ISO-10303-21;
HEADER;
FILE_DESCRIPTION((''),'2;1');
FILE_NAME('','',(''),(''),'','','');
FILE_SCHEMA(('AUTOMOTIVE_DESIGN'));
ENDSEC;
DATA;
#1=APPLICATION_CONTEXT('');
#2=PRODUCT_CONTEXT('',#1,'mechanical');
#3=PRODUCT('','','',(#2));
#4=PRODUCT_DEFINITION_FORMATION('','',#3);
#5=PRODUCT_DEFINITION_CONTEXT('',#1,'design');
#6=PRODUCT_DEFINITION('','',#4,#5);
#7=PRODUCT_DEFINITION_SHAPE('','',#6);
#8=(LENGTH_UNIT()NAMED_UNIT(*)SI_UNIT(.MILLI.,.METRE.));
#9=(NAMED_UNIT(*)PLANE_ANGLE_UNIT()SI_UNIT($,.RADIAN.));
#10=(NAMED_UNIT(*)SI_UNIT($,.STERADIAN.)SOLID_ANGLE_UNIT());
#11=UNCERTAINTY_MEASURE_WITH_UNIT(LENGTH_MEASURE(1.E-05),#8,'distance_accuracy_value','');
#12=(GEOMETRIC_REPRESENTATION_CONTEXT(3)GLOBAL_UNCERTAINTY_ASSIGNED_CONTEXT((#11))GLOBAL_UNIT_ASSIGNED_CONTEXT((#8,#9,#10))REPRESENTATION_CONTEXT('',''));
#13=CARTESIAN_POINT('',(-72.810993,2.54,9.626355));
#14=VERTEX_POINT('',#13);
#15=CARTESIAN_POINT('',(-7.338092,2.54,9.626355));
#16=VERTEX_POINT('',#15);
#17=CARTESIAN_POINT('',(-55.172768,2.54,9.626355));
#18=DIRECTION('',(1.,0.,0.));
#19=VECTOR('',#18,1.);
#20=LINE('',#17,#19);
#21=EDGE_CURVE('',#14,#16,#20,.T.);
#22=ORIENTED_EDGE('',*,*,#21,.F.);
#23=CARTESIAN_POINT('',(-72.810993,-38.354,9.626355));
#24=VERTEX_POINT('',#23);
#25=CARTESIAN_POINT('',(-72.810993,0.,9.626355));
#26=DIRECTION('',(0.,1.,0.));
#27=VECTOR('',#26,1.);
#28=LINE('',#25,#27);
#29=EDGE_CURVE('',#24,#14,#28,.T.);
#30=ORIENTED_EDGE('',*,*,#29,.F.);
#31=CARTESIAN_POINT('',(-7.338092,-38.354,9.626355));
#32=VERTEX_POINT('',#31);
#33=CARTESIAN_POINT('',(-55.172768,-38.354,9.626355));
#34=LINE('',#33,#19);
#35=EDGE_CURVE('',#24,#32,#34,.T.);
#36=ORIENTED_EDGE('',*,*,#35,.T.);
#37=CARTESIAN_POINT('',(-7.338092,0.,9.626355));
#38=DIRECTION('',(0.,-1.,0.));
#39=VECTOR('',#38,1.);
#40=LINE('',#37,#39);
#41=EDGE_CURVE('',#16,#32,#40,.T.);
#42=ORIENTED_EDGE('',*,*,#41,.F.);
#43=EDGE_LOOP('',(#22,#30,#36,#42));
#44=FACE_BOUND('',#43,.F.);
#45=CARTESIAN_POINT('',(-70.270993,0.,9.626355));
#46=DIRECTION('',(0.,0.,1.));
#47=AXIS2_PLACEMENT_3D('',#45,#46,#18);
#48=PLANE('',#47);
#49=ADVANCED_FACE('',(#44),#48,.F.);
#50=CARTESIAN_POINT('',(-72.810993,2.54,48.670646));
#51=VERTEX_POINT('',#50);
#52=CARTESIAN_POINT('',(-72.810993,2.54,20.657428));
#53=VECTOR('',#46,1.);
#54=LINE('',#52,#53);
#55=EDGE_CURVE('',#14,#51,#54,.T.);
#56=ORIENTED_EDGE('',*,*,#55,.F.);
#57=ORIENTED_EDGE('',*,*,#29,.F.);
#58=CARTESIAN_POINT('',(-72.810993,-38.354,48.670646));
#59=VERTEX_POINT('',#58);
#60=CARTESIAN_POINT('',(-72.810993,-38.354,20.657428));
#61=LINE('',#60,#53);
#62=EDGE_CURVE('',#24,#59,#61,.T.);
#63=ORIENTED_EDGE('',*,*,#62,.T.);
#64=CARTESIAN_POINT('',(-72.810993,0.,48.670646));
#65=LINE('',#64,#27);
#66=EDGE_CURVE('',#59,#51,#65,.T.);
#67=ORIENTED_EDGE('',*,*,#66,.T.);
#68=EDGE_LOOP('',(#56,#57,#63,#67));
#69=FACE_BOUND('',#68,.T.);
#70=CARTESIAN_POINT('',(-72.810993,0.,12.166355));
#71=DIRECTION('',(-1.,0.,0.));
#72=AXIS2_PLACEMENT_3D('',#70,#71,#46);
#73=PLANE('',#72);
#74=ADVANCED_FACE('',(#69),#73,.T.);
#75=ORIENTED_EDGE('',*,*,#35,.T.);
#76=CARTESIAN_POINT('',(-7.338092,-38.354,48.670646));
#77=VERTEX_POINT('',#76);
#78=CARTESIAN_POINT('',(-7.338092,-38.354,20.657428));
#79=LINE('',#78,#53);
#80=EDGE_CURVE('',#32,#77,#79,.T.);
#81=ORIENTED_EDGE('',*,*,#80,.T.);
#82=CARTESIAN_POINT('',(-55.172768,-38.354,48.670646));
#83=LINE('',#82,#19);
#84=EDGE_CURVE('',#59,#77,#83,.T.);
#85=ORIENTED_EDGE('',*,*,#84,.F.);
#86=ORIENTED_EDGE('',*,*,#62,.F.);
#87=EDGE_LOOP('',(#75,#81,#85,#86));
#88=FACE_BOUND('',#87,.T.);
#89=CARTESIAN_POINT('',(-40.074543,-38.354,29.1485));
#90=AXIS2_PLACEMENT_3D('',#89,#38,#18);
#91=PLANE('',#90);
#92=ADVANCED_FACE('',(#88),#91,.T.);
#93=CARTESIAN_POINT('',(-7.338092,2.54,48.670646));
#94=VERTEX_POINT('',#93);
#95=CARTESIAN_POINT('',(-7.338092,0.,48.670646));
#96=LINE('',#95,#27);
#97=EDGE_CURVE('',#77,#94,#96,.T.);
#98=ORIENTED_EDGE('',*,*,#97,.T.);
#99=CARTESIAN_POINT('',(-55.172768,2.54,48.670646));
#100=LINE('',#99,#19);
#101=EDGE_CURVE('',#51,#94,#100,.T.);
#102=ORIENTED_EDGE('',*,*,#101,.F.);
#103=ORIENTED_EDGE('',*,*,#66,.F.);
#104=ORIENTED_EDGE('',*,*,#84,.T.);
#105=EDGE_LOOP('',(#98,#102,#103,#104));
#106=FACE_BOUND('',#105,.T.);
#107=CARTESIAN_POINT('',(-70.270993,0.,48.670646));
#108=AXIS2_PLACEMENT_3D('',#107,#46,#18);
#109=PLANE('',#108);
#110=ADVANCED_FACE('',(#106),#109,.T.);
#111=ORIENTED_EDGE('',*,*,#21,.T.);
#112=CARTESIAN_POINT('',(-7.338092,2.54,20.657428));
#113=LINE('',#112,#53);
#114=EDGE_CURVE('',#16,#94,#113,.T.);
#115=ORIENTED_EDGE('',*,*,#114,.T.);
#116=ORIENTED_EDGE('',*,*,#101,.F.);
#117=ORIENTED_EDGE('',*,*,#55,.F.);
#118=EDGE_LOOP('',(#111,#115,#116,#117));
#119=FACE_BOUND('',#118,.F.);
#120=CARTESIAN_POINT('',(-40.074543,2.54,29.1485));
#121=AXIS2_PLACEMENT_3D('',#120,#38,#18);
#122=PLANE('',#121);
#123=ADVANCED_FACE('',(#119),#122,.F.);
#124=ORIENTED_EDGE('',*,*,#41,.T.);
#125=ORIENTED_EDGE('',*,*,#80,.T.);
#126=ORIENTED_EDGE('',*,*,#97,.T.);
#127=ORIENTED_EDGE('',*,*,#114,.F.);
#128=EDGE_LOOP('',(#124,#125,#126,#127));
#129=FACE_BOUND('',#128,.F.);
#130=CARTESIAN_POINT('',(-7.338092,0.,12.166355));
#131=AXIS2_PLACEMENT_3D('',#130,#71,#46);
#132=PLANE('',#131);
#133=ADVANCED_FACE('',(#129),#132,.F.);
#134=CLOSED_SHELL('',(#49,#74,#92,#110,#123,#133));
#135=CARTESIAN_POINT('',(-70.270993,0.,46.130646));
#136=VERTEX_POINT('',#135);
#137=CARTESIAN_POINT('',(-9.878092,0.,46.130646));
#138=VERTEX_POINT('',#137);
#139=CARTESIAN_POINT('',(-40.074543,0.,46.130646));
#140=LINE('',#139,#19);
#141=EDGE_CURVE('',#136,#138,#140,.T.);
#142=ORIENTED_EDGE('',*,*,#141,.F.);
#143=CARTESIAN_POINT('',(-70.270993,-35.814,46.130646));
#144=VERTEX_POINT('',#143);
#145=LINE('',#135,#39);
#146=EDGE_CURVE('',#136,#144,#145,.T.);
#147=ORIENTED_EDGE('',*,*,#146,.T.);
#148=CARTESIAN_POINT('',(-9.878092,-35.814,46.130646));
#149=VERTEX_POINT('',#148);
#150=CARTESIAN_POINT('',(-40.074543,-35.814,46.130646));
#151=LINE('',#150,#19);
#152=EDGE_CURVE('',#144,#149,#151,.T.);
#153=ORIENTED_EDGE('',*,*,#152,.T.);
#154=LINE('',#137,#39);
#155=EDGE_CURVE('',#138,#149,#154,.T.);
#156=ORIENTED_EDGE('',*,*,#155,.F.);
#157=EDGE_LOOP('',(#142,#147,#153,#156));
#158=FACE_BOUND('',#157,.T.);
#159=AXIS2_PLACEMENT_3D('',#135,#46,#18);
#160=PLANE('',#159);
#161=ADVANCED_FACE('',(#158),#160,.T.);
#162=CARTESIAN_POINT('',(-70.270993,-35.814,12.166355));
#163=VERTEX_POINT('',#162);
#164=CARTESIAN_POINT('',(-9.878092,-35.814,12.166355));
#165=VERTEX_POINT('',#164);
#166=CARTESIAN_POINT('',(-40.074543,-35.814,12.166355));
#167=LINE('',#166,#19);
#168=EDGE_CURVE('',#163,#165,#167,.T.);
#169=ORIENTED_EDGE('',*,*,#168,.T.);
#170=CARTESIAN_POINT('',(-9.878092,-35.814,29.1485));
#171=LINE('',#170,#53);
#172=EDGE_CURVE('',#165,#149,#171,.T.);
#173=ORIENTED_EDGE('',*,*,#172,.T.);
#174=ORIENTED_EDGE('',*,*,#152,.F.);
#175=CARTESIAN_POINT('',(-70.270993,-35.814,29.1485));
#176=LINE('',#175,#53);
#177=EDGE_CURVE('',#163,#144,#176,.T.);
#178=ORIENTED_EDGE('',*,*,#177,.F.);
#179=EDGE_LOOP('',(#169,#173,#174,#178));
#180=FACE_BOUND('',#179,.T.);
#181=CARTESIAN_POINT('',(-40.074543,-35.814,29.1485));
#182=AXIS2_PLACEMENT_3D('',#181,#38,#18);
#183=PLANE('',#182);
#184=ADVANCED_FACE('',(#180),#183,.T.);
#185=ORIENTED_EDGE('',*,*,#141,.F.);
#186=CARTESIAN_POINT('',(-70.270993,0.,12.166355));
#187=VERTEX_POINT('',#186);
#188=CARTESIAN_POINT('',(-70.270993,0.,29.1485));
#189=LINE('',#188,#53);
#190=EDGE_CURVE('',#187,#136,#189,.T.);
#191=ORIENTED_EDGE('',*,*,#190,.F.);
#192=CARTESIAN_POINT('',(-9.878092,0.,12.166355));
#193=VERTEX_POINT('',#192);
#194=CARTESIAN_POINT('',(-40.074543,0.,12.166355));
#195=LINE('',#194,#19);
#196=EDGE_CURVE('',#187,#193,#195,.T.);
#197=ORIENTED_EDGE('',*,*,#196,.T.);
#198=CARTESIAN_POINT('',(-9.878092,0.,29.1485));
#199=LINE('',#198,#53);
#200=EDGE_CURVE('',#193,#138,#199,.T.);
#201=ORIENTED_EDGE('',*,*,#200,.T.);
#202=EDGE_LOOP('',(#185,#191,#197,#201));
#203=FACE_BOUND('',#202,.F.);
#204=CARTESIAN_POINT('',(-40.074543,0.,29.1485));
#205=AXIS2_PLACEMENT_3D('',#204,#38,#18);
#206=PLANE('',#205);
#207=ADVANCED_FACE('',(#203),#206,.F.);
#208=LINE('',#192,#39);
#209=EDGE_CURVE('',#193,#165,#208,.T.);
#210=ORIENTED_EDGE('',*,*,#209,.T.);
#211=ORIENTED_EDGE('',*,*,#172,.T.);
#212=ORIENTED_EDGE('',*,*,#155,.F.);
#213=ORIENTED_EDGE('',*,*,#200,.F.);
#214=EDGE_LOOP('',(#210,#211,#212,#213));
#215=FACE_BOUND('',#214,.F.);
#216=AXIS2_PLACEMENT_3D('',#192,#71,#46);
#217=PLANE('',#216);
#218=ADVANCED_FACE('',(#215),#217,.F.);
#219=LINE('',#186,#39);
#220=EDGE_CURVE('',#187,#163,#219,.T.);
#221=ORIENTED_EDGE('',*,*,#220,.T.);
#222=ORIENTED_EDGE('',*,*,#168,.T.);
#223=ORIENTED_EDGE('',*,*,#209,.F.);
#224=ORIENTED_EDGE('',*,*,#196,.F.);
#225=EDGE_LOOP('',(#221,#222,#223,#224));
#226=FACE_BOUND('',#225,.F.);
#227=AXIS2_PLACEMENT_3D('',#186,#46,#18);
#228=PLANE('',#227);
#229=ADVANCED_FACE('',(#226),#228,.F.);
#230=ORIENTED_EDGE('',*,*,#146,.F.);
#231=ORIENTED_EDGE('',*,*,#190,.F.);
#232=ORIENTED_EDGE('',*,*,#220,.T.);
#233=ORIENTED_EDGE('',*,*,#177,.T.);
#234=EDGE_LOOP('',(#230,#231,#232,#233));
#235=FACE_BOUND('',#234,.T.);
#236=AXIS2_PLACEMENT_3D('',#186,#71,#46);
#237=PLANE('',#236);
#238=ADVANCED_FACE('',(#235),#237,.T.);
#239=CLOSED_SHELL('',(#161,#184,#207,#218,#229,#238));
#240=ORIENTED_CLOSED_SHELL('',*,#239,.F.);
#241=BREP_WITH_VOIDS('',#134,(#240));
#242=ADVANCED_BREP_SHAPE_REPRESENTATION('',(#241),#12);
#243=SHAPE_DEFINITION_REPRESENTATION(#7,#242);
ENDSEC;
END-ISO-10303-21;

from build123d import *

# Parameters (mm, degrees)
F0_W     = 60.3929003701
F0_H     = 33.9642912149
F1_DEPTH = 35.814
F2_T     = 2.54


with BuildPart() as f1:
    # F0 (on Front) → F1 (new body)
    with BuildSketch(Plane.XZ):
        with Locations((-40.0745426305, 29.1485004127)):
            Rectangle(F0_W, F0_H)
    extrude(amount=F1_DEPTH)

    # F2 (hollow, outwards: the wall grows on the outside; the body as it was is the cavity)
    f2_inside = f1.part
    offset(amount=F2_T, kind=Kind.INTERSECTION)
    add(f2_inside, mode=Mode.SUBTRACT)


solid = f1.part
